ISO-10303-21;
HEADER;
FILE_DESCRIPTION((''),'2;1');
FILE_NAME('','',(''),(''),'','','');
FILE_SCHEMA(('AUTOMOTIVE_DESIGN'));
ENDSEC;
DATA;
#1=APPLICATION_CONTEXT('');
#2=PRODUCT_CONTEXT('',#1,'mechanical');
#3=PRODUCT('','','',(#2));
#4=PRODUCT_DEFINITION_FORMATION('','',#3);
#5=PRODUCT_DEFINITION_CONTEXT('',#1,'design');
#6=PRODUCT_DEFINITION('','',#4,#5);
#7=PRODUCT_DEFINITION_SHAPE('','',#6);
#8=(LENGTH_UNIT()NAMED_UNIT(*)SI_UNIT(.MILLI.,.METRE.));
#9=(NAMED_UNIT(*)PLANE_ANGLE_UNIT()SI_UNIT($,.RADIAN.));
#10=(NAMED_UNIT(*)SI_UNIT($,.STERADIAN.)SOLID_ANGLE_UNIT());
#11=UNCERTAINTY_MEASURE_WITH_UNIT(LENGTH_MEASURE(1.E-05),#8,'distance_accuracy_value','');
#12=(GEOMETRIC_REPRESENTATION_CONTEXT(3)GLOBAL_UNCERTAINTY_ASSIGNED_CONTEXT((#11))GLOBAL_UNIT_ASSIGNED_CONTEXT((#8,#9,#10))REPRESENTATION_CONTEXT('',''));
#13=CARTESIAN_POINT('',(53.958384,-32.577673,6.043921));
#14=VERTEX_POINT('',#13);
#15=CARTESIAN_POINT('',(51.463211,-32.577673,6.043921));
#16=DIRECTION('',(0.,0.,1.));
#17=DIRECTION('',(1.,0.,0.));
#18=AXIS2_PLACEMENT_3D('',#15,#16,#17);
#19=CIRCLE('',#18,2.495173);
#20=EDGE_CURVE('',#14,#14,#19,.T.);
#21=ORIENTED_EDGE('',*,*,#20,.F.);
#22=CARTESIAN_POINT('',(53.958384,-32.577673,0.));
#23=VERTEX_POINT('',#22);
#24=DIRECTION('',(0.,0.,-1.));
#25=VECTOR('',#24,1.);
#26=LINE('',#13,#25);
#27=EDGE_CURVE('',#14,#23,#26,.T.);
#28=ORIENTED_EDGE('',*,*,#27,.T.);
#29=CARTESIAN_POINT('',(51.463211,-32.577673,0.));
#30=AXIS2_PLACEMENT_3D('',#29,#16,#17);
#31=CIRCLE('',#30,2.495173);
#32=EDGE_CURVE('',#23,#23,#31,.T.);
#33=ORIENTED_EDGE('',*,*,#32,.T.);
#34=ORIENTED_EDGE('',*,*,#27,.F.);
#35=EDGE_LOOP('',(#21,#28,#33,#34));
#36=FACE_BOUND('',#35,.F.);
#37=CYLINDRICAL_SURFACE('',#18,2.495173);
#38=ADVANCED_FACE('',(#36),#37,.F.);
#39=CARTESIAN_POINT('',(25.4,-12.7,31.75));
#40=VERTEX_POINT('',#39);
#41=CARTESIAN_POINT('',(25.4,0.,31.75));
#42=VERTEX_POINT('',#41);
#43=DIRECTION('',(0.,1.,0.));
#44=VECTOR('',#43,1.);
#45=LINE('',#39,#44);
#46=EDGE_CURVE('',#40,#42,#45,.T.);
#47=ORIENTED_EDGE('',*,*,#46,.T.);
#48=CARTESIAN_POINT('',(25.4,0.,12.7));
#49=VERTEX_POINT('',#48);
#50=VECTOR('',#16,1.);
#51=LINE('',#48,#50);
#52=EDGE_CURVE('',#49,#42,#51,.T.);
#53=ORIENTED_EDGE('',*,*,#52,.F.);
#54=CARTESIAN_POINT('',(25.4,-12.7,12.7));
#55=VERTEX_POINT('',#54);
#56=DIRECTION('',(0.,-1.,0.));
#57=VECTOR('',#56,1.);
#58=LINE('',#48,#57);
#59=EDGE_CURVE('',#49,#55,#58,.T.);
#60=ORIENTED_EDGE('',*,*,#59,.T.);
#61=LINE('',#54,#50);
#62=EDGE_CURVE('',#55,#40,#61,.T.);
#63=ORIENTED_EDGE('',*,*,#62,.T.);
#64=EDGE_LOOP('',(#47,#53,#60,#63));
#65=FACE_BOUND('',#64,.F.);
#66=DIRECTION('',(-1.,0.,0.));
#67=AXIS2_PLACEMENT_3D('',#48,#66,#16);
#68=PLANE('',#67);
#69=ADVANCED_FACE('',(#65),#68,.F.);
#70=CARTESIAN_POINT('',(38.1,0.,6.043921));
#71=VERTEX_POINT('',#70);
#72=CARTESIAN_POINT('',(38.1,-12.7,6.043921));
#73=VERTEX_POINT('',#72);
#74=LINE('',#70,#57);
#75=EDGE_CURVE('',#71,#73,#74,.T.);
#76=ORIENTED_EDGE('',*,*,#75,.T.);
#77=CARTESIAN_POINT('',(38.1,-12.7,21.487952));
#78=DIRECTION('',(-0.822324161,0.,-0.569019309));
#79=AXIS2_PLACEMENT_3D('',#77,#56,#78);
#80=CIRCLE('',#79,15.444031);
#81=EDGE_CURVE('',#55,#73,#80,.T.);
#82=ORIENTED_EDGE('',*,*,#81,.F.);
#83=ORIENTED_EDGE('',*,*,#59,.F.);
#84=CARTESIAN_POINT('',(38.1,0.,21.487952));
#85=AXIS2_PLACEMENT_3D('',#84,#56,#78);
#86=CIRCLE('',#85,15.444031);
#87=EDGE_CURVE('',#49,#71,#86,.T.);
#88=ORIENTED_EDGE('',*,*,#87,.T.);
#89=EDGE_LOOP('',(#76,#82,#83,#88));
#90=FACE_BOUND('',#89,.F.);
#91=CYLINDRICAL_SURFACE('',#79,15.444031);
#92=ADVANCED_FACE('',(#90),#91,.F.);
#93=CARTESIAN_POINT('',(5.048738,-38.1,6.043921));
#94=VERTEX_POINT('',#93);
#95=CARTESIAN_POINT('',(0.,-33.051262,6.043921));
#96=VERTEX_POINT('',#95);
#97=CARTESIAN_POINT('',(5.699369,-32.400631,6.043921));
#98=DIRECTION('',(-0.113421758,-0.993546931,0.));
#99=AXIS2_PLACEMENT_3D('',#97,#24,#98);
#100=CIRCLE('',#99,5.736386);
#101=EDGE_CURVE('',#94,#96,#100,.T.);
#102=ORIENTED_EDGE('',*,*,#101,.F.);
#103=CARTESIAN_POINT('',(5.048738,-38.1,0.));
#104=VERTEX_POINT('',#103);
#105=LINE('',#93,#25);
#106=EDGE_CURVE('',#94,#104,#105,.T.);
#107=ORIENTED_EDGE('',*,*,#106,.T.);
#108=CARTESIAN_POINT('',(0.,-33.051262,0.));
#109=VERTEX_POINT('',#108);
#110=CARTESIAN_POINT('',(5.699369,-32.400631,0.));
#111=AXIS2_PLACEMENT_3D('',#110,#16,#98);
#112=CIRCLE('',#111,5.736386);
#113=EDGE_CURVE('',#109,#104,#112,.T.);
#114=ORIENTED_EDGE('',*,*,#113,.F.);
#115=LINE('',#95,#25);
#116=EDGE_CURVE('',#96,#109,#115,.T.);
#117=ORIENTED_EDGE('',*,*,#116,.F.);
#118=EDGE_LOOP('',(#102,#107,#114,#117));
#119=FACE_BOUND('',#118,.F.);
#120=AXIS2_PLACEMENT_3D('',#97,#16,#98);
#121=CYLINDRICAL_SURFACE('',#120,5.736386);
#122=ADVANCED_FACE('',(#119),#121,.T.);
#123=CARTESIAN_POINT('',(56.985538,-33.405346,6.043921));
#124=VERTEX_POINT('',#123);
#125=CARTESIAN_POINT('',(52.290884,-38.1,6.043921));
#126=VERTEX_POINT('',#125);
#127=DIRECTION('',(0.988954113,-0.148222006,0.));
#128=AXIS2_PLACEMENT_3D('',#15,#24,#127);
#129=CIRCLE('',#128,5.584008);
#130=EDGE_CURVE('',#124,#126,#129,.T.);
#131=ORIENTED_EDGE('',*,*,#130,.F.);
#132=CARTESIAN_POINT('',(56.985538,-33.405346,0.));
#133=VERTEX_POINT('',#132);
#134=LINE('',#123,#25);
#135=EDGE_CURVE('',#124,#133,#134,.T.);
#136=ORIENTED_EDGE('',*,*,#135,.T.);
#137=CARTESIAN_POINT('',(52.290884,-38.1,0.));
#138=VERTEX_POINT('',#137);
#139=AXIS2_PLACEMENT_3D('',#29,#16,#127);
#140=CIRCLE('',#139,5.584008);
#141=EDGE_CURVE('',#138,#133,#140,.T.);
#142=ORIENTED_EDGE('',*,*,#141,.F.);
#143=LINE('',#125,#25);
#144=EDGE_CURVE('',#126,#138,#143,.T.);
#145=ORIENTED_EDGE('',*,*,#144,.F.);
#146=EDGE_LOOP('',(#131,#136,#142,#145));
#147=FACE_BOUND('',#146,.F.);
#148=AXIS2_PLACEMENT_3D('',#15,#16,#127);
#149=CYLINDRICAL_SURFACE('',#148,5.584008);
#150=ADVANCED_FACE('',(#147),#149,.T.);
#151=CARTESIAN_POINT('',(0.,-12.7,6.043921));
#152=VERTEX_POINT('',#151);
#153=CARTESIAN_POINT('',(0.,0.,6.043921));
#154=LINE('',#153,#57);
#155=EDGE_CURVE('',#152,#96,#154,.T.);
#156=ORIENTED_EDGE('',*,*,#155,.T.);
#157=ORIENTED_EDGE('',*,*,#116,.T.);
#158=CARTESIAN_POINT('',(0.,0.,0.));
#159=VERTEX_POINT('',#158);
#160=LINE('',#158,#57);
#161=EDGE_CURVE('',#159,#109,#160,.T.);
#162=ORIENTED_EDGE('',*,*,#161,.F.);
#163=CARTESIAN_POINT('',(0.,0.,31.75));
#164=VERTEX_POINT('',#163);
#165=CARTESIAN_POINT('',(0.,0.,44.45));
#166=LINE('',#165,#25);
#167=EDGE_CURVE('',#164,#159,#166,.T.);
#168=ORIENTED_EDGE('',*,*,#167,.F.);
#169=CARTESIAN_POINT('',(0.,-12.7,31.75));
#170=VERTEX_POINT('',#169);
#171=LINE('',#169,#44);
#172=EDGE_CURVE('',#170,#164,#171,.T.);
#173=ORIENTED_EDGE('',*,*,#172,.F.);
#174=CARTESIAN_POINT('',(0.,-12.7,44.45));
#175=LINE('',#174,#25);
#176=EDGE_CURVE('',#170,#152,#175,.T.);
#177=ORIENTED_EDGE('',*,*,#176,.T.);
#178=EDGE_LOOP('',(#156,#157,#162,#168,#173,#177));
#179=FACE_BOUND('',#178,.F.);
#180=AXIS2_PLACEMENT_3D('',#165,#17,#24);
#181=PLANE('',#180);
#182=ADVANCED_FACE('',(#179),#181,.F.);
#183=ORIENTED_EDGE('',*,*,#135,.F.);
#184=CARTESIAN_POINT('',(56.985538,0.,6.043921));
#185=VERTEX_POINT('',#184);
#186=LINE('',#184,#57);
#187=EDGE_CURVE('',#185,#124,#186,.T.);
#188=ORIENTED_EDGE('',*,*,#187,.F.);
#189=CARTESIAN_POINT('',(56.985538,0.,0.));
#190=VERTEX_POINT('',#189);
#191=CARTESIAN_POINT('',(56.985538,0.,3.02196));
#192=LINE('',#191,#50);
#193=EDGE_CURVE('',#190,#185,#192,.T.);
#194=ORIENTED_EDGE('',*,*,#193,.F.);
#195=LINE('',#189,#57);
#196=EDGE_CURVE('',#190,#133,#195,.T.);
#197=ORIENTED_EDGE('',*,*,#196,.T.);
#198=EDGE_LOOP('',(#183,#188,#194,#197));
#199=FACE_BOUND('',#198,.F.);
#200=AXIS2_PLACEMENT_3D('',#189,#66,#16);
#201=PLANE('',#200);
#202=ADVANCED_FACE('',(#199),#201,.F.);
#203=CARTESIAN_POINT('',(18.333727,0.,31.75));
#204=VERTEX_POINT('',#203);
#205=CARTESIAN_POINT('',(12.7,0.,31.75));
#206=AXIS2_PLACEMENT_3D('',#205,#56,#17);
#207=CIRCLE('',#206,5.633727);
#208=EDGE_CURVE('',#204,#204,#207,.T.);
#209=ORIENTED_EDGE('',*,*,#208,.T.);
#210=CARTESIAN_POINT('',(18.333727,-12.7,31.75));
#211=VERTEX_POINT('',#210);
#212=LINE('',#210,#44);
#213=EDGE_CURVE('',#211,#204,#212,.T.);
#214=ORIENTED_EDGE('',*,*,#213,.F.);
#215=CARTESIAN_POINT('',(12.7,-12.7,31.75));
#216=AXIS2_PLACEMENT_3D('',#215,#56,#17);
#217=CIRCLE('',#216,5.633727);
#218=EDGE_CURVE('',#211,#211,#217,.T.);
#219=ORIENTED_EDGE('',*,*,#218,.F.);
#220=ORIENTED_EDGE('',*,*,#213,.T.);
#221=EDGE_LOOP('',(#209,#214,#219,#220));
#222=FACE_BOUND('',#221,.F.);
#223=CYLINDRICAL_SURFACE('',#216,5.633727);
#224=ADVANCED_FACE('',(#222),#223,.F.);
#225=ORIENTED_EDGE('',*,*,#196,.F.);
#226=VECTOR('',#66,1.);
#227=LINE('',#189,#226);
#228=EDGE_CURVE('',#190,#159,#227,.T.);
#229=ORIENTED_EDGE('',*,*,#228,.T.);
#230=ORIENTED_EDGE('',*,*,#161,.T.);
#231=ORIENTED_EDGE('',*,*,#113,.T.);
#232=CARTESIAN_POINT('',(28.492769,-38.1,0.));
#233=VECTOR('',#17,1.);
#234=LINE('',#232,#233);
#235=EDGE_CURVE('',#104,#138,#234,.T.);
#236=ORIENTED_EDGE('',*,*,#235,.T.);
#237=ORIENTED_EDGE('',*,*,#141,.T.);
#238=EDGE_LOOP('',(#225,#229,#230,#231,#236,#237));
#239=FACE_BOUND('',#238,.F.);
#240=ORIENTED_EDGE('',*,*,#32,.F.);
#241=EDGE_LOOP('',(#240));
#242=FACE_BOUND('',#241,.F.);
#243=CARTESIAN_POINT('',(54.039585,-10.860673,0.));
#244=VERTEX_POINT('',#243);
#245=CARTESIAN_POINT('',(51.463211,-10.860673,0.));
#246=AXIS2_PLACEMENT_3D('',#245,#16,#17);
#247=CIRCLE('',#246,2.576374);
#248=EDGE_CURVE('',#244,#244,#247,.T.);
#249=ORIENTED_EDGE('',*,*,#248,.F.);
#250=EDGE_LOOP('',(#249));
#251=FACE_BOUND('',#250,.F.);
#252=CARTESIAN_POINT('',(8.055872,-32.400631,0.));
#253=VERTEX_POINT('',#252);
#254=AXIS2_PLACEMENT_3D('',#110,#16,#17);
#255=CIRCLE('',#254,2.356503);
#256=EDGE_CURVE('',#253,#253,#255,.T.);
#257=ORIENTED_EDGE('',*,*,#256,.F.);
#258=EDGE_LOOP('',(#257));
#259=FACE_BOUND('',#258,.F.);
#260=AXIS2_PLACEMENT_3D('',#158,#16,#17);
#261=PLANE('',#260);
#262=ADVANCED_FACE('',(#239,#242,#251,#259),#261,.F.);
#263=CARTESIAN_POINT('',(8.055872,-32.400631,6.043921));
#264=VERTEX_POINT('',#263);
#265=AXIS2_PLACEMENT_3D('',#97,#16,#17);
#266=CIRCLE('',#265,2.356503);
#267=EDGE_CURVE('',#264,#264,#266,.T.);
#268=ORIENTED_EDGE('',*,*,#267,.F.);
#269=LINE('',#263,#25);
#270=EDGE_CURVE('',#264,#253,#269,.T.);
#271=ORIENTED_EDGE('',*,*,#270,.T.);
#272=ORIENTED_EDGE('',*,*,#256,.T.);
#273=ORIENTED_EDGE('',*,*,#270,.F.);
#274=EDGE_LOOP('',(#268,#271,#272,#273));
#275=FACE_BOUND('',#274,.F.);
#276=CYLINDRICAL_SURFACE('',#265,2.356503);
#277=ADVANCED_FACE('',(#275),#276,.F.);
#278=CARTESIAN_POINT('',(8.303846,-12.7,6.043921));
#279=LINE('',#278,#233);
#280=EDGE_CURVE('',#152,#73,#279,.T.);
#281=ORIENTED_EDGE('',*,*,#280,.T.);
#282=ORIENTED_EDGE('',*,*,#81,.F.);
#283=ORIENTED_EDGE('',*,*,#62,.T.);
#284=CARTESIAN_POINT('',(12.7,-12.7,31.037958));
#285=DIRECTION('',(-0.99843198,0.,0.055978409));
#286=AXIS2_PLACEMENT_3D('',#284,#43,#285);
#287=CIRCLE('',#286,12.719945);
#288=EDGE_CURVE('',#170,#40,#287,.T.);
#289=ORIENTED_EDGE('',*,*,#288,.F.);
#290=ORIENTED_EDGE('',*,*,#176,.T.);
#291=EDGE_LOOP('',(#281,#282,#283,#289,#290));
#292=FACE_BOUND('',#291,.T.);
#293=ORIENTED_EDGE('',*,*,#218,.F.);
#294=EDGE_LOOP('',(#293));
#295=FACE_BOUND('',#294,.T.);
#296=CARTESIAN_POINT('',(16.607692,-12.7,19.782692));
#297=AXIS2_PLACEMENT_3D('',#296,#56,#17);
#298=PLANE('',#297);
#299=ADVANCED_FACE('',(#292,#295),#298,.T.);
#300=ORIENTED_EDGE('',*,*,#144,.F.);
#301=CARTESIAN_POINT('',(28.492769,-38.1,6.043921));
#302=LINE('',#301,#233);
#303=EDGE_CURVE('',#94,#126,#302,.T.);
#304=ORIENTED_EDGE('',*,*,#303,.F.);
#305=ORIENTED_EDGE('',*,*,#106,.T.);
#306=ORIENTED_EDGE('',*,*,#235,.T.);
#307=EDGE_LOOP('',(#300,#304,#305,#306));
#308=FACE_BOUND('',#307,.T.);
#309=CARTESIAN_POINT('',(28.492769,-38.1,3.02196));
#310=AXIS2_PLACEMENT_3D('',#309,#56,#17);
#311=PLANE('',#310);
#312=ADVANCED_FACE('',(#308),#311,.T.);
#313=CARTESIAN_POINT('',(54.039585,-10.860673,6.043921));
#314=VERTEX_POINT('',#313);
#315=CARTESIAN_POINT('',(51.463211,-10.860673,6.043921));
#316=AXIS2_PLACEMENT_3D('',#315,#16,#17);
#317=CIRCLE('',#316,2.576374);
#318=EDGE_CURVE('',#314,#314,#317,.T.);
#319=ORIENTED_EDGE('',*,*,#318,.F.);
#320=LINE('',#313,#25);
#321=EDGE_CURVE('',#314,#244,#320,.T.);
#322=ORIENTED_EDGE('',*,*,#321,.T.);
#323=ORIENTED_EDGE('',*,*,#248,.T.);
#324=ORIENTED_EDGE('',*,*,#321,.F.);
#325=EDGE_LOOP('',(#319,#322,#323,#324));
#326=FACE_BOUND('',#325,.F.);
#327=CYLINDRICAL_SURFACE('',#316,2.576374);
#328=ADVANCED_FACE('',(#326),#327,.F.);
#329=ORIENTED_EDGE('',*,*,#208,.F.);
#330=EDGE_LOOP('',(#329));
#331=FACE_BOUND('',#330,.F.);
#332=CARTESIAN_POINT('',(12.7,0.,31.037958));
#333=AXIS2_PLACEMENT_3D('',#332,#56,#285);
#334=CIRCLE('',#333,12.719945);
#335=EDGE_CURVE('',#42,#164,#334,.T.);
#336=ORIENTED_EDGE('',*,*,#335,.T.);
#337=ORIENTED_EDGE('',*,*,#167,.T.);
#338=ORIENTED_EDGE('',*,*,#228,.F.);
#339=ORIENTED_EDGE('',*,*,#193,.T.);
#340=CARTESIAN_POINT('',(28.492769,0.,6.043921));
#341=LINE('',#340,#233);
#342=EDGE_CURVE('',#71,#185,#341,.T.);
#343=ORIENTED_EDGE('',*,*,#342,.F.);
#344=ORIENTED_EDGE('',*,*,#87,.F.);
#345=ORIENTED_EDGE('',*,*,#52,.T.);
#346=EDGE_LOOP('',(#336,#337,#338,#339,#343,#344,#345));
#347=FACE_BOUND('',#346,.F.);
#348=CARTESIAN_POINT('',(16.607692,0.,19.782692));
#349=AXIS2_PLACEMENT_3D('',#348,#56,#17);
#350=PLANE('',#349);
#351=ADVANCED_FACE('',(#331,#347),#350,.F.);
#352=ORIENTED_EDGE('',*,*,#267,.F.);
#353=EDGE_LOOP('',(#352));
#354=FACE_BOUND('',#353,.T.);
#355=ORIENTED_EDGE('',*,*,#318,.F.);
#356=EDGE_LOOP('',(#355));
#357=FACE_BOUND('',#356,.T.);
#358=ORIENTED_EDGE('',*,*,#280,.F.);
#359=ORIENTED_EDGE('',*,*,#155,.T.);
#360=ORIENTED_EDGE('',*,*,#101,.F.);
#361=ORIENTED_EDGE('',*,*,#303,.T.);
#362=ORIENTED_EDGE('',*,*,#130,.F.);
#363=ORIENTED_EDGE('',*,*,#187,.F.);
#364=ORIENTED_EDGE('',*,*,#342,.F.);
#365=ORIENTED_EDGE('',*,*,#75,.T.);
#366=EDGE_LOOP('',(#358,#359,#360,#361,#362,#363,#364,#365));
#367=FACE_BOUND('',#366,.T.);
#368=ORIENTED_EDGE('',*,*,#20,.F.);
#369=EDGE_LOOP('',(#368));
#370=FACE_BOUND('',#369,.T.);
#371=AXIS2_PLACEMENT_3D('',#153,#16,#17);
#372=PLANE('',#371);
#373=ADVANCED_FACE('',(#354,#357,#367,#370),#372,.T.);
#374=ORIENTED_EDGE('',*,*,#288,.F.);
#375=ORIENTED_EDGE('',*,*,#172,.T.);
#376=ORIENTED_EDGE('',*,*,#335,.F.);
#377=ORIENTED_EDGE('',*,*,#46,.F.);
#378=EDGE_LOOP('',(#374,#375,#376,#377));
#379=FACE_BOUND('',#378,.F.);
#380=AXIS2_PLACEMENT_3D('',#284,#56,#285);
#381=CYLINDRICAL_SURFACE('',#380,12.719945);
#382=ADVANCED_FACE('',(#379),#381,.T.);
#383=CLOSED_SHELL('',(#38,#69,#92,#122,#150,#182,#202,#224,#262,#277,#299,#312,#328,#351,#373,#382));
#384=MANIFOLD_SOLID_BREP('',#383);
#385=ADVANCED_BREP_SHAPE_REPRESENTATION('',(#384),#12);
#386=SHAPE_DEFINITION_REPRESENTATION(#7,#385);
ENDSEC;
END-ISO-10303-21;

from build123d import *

# Parameters (mm, degrees)
F0_W     = 56.9855384529
F0_H     = 6.0439207591
F1_DEPTH = 38.1
F3_DEPTH = 12.7
F4_R     = 5.6337267147
F5_DEPTH = 25.4
F6_R     = 2.5763739366
F6_R_2   = 2.4951731212
F6_R_3   = 2.3565031445
F7_DEPTH = 25.4


with BuildPart() as f1:
    # F0 (on Front) → F1 (new body)
    with BuildSketch(Plane.XZ):
        with Locations((28.4927692264, 3.0219603796)):
            Rectangle(F0_W, F0_H)
    extrude(amount=F1_DEPTH)

    # F2 (on Front) → F3 (join)
    with BuildSketch(Plane.XZ):
        Polygon((0, 44.45), (0, 0), (38.1, 0), (38.1, 12.7), (25.4, 12.7), (25.4, 44.45), align=None)
    extrude(amount=F3_DEPTH)

    # F4 (on face) → F5 (cut)
    with BuildSketch(Plane.XZ.offset(12.7)):
        with BuildLine():
            ThreePointArc((0, 31.75), (12.7, 43.757902847), (25.4, 31.75))
            Line((25.4, 31.75), (25.4, 44.45))
            Line((25.4, 44.45), (0, 44.45))
            Line((0, 44.45), (0, 31.75))
        make_face()
        with Locations((12.7, 31.75)):
            Circle(F4_R)
        with BuildLine():
            Line((38.1, 12.7), (25.4, 12.7))
            ThreePointArc((25.4, 12.7), (30.9307359014, 7.8087797629), (38.1, 6.0439207591))
            Line((38.1, 6.0439207591), (38.1, 12.7))
        make_face()
    extrude(amount=-F5_DEPTH, mode=Mode.SUBTRACT)

    # F6 (on face) → F7 (cut)
    with BuildSketch(Plane.XY.offset(6.0439207591)):
        with BuildLine():
            ThreePointArc((56.9855384529, -33.4053455879), (55.411700833, -36.5261623801), (52.2908840407, -38.1))
            Line((52.2908840407, -38.1), (56.9855384529, -38.1))
            Line((56.9855384529, -38.1), (56.9855384529, -33.4053455879))
        make_face()
        with BuildLine():
            ThreePointArc((5.0487379712, -38.1), (1.6431313477, -36.4568686523), (0, -33.0512620288))
            Line((0, -33.0512620288), (0, -38.1))
            Line((0, -38.1), (5.0487379712, -38.1))
        make_face()
        with Locations((51.4632112468, -10.8606727939)):
            Circle(F6_R)
        with Locations((51.4632112468, -32.5776727939)):
            Circle(F6_R_2)
        with Locations((5.6993689856, -32.4006310144)):
            Circle(F6_R_3)
    extrude(amount=-F7_DEPTH, mode=Mode.SUBTRACT)


solid = f1.part
